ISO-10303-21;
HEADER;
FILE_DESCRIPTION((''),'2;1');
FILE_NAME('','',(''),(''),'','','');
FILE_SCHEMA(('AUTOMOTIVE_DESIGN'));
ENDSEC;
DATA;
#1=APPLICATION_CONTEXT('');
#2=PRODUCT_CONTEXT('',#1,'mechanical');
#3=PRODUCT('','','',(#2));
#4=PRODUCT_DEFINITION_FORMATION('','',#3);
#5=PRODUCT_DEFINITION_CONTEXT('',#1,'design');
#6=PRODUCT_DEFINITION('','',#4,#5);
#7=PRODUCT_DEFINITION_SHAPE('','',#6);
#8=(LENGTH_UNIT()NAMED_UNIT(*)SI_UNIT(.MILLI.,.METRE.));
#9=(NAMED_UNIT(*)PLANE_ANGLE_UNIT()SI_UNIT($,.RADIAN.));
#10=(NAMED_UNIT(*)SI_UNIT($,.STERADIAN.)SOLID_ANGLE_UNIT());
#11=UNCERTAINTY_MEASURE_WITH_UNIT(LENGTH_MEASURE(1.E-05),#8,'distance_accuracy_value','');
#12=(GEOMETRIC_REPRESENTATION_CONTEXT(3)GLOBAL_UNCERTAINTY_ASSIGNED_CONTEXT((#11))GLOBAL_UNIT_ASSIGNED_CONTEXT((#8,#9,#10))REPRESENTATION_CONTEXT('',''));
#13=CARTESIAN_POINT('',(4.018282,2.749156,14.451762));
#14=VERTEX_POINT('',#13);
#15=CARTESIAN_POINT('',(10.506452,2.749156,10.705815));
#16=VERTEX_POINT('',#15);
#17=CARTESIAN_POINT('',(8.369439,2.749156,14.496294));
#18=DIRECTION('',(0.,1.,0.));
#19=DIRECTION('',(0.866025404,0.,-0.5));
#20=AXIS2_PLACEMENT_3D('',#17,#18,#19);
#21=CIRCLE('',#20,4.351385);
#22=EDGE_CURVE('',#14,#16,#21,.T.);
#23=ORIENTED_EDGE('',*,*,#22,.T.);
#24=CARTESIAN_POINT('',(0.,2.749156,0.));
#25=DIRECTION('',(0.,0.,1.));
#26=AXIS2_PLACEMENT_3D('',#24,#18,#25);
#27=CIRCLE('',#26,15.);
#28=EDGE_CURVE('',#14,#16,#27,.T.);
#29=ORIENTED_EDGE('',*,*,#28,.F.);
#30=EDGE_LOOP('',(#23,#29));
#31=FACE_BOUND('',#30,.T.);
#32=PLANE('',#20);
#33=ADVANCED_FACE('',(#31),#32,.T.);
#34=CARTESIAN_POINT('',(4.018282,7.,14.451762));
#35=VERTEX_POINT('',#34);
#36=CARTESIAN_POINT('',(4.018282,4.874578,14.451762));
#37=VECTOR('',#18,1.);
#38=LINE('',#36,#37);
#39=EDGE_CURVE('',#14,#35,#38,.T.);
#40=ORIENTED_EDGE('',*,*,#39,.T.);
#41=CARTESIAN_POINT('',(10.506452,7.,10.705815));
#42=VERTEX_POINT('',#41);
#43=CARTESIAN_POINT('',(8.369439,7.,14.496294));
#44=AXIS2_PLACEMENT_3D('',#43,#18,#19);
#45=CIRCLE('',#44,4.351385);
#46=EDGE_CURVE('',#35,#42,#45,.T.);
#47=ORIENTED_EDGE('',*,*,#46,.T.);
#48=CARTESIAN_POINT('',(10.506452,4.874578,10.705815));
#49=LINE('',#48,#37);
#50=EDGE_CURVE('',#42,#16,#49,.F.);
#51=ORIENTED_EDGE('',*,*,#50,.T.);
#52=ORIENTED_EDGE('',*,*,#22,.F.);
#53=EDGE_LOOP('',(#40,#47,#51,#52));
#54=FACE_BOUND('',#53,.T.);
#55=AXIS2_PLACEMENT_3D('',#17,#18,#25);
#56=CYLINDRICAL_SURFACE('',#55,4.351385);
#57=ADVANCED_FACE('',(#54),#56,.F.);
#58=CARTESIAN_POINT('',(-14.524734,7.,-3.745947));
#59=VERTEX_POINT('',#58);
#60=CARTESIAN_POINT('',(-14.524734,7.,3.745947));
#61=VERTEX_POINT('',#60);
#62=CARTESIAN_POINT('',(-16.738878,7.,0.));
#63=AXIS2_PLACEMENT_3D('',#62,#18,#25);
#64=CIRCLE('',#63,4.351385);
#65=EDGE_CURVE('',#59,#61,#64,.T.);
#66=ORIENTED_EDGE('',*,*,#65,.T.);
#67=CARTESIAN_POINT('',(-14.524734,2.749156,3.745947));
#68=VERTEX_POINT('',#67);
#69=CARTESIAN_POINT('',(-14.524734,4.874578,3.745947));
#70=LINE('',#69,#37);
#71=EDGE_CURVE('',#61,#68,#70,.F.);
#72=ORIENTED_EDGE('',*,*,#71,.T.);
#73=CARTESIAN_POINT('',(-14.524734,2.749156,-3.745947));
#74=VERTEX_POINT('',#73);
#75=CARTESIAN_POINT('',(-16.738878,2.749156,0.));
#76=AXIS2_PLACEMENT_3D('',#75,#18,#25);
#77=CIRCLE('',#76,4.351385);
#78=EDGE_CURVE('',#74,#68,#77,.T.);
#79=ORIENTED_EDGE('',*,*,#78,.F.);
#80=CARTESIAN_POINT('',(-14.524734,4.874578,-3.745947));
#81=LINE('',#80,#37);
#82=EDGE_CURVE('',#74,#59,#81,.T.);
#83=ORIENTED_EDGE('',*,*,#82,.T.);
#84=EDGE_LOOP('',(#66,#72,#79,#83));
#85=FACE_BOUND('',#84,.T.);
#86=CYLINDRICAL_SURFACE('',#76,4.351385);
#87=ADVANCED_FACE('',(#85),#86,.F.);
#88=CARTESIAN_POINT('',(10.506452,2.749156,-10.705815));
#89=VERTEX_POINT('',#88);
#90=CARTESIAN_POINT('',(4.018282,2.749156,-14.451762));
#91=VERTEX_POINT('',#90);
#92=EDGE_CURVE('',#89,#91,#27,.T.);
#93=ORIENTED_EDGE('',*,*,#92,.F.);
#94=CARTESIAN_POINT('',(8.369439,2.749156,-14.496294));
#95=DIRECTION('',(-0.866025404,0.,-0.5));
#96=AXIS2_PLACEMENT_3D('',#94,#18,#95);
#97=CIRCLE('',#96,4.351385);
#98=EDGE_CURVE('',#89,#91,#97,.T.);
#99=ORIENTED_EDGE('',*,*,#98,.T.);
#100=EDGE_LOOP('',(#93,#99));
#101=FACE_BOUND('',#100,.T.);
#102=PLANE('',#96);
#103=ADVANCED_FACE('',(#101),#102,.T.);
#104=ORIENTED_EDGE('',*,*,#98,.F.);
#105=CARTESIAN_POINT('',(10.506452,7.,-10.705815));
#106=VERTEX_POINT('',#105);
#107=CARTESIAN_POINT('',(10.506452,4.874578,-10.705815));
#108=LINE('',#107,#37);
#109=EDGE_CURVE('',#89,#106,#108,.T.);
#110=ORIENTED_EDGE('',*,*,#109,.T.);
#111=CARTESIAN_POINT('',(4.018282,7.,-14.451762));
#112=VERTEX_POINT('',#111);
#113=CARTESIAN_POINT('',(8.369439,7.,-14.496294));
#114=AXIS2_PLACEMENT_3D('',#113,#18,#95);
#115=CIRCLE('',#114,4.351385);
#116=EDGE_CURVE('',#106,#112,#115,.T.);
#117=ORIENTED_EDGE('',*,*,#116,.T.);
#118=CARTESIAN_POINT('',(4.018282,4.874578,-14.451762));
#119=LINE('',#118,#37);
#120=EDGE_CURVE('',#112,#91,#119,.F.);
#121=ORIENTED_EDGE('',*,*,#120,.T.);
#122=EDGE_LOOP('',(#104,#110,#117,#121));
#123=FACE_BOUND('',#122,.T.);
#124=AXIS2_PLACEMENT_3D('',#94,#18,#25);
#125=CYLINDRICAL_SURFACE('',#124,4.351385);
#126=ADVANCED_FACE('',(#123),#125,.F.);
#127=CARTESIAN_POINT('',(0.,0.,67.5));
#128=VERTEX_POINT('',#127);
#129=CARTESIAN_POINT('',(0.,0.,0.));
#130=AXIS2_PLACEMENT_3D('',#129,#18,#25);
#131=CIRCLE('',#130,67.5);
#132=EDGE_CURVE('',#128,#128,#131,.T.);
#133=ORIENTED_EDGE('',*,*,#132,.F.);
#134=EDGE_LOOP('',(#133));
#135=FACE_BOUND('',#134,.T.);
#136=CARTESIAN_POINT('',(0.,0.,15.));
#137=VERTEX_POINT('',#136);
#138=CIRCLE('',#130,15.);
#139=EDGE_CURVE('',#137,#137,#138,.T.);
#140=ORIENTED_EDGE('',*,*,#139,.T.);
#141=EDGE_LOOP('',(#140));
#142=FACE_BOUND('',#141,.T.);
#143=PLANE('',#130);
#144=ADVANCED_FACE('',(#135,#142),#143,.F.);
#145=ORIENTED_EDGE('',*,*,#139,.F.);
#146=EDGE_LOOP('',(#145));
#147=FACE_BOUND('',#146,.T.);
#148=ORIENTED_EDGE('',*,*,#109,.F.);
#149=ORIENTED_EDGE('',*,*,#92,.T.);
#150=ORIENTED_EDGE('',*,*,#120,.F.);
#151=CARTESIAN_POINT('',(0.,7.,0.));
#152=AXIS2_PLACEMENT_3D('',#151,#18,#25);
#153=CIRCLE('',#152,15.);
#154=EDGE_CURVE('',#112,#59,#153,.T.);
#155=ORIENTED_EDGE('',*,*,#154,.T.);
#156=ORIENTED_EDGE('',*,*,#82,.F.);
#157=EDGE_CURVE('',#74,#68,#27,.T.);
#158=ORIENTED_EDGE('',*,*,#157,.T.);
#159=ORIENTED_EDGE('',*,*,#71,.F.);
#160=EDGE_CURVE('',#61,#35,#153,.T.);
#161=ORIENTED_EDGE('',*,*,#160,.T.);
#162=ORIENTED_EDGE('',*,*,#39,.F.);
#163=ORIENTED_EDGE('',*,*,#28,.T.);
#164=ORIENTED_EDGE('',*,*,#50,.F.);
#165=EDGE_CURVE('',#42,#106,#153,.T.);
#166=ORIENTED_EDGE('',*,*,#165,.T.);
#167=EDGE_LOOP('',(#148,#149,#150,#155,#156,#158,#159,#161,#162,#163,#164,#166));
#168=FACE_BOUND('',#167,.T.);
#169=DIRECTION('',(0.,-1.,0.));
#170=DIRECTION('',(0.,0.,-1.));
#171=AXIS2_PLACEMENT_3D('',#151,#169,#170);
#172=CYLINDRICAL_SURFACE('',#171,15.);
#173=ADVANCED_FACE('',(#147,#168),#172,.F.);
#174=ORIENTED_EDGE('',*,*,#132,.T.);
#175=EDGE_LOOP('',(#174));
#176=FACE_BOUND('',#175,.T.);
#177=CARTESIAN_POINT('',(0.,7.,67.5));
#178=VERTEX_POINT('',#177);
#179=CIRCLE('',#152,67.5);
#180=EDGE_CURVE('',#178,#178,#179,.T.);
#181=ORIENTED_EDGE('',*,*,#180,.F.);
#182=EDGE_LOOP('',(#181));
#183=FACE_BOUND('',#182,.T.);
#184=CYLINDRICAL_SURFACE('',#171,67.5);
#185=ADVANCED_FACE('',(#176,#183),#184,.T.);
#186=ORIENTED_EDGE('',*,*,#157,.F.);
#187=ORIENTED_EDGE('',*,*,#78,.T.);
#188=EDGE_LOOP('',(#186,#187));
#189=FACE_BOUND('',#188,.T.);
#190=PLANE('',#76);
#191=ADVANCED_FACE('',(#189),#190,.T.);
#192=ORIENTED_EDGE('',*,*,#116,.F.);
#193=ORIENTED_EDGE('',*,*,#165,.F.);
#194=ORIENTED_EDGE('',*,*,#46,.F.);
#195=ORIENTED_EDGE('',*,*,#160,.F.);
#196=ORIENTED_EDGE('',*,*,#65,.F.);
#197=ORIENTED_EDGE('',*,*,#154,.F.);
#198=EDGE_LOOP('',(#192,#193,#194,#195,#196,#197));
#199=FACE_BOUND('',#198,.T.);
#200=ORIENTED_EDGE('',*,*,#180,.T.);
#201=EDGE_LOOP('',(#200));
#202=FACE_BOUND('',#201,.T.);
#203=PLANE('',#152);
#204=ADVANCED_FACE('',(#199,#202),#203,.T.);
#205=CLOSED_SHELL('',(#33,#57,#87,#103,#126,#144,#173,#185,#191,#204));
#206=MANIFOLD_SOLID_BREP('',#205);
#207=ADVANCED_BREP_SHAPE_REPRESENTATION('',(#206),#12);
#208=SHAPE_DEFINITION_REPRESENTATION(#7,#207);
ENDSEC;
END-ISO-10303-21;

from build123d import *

# Parameters (mm, degrees)
SKETCH1_R           = 67.5
BOSS_EXTRUDE1_DEPTH = 7
SKETCH2_R           = 15
CUT_EXTRUDE1_DEPTH  = 96.715724936
SKETCH3_R           = 4.351385067
CUT_EXTRUDE2_DEPTH  = 4.250843592
CIRPATTERN1_COUNT   = 3


with BuildPart() as part:
    # Sketch1 → Boss-Extrude1 (new body)
    with BuildSketch(Plane(origin=(0, 0, 0), x_dir=(1, 0, 0), z_dir=(0, 1, 0))):
        Circle(SKETCH1_R)
    extrude(amount=BOSS_EXTRUDE1_DEPTH)

    # Sketch2 → Cut-Extrude1 (cut, through all)
    with BuildSketch(Plane(origin=(0, 0, 0), x_dir=(1, 0, 0), z_dir=(0, 1, 0))):
        Circle(SKETCH2_R)
    extrude(amount=CUT_EXTRUDE1_DEPTH, mode=Mode.SUBTRACT)

    # Sketch3 → Cut-Extrude2 (cut)
    with BuildSketch(Plane(origin=(0, 7, 0), x_dir=(1, 0, 0), z_dir=(0, 1, 0))):
        with Locations((-16.73887817, 0)):
            Circle(SKETCH3_R)
    cut_extrude2 = extrude(amount=-CUT_EXTRUDE2_DEPTH, mode=Mode.SUBTRACT)

    # CirPattern1: Cut-Extrude2 ×3 about axis
    cirpattern1_axis = Axis((0, 0, 0), (0, 1, 0))
    for i in range(1, CIRPATTERN1_COUNT):
        add(cut_extrude2.rotate(cirpattern1_axis, i * 360 / CIRPATTERN1_COUNT), mode=Mode.SUBTRACT)


solid = part.part
